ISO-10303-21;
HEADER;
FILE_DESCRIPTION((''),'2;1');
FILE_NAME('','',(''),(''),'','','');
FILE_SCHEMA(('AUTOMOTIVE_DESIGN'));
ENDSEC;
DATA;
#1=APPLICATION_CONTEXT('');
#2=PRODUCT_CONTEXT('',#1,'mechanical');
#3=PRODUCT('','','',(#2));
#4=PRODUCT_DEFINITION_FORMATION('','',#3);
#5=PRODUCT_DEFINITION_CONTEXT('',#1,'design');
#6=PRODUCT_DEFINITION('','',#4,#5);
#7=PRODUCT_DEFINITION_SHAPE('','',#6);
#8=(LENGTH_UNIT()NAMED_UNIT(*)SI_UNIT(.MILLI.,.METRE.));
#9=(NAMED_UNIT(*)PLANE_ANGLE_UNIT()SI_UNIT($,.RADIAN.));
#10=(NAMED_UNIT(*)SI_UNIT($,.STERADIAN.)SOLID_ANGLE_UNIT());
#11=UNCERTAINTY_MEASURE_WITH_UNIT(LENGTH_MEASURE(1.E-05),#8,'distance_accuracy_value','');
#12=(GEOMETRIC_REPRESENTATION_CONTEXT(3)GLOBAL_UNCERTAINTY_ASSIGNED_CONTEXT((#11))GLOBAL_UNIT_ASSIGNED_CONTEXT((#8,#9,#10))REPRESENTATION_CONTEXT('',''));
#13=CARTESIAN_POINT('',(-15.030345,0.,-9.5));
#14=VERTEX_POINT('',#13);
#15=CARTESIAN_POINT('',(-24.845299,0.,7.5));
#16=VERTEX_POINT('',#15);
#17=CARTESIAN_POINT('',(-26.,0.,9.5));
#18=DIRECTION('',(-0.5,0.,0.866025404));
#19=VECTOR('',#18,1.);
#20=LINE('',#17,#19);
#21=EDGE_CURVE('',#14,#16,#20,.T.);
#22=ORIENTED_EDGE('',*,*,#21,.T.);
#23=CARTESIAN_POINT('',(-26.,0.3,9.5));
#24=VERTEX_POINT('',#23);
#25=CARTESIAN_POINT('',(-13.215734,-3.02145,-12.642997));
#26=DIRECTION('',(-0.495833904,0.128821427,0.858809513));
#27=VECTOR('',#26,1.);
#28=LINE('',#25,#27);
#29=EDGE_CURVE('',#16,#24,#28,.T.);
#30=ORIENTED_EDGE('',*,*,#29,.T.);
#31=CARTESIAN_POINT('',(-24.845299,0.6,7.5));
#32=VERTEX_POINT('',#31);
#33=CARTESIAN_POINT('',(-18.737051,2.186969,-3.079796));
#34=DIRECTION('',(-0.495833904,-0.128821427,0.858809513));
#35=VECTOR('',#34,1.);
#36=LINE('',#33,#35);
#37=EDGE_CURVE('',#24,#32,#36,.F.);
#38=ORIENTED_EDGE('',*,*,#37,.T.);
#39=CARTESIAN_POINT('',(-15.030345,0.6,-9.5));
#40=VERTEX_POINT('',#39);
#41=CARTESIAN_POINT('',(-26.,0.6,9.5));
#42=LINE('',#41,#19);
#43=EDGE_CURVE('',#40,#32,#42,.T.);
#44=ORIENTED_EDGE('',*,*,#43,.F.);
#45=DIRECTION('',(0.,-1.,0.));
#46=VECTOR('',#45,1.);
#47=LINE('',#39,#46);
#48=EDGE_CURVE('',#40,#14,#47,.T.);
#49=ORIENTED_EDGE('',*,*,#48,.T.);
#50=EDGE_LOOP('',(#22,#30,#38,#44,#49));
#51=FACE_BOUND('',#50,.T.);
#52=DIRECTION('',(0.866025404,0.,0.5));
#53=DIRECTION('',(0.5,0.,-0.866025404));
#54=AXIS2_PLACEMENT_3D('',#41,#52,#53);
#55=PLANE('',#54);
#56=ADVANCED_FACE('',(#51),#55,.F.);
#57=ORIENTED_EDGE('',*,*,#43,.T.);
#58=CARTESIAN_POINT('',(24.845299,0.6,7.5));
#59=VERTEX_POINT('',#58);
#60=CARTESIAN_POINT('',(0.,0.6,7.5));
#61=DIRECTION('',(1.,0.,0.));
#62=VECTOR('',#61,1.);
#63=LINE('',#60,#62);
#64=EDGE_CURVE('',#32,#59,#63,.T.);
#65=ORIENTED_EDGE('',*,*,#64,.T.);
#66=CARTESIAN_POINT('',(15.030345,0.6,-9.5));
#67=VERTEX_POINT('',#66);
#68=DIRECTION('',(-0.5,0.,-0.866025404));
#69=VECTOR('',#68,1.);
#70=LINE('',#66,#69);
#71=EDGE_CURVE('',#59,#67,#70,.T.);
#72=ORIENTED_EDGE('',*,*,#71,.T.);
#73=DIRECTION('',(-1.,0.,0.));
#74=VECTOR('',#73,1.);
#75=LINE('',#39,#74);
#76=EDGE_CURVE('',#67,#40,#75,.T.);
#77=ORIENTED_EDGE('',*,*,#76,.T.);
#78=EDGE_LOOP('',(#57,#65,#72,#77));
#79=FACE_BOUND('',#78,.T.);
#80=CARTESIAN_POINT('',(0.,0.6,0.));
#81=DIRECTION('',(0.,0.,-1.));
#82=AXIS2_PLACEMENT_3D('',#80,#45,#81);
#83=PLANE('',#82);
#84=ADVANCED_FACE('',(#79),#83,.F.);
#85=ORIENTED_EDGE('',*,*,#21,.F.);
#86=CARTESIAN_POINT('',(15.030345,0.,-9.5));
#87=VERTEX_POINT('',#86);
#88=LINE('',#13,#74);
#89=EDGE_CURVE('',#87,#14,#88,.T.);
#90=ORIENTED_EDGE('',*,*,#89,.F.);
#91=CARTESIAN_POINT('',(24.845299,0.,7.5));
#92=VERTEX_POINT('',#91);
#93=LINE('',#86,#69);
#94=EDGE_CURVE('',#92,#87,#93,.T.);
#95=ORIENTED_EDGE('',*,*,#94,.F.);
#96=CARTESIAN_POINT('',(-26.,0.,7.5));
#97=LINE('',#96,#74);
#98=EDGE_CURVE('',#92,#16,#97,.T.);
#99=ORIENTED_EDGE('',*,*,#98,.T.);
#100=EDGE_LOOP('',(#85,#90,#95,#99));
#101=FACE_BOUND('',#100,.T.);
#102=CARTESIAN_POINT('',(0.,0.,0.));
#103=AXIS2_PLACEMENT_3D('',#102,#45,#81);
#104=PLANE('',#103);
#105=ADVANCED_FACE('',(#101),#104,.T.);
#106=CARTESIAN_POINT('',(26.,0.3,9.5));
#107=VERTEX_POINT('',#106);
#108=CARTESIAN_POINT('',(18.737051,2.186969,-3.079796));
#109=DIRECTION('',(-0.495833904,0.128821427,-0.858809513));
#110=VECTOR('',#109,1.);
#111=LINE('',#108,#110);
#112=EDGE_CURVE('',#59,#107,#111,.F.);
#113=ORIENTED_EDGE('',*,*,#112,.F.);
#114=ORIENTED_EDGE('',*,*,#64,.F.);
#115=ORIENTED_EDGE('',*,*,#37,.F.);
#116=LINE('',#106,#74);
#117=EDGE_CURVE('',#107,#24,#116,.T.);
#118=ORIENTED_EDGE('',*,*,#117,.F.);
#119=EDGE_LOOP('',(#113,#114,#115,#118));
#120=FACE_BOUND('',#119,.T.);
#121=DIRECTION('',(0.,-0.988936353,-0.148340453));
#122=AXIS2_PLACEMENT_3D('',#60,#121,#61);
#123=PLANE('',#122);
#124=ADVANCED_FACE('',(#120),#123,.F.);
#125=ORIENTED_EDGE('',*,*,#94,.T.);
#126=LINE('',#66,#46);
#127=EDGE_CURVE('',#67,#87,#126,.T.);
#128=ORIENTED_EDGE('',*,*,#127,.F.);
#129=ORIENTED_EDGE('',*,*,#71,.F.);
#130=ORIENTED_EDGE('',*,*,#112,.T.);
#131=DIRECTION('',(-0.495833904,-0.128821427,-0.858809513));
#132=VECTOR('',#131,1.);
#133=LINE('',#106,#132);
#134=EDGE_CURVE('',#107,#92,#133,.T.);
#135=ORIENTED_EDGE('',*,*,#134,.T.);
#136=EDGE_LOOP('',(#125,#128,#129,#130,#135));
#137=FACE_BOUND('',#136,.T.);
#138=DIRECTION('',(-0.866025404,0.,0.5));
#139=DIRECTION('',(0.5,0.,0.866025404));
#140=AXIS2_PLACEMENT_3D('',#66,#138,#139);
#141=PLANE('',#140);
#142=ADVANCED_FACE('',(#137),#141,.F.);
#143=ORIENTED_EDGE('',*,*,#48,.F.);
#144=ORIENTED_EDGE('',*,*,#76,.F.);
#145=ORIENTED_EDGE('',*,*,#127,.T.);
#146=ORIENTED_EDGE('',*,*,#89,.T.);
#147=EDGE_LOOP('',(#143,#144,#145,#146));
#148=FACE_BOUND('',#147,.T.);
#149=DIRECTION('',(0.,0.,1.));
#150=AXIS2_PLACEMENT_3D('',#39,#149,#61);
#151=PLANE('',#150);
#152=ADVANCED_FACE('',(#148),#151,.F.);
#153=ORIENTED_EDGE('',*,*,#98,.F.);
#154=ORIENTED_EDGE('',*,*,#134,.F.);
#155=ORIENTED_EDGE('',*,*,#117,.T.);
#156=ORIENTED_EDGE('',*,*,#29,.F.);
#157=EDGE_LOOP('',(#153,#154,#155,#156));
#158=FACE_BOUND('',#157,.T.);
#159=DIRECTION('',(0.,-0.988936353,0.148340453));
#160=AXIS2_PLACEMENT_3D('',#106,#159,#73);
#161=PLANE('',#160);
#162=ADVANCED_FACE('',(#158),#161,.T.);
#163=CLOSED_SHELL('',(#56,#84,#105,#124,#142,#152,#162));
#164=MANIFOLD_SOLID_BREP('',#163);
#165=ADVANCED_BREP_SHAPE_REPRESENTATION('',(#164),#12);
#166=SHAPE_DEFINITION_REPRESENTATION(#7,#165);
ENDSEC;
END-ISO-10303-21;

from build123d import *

# Parameters (mm, degrees)
BOSS_EXTRUDE1_DEPTH = 0.6
CHAMFER1_SIZE       = 0.3
CHAMFER1_SIZE2      = 2
CHAMFER2_SIZE       = 0.3
CHAMFER2_SIZE_2     = 2


with BuildPart() as part:
    # Sketch1 → Boss-Extrude1 (new body)
    with BuildSketch(Plane(origin=(0, 0, 0), x_dir=(1, 0, 0), z_dir=(0, 1, 0))):
        Polygon((-15.030344885, 9.5), (15.030344885, 9.5), (26, -9.5), (-26, -9.5), align=None)
    extrude(amount=BOSS_EXTRUDE1_DEPTH)

    # Chamfer1
    chamfer1_edges = [part.edges().sort_by_distance(p)[0] for p in [
        (0, 0.6, 9.5),
    ]]
    chamfer1_side = [part.faces().sort_by_distance(p)[0] for p in [
        (0, 0.3, 9.5),
    ]]
    chamfer(chamfer1_edges, length=CHAMFER1_SIZE, length2=CHAMFER1_SIZE2, reference=chamfer1_side[0])

    # Chamfer2
    # the kernel refuses this chamfer: 2, 0.3 mm, written as the material it takes off along each edge
    with BuildSketch(Plane(origin=(31.19787194, 0, 9.5), x_dir=(0, 0.9692970769593504, 0.24589261192247985), z_dir=(-1, 0, 0))) as chamfer2_piece_1:
        Polygon((CHAMFER2_SIZE * 0.969297076959, CHAMFER2_SIZE * 0.245892611922), (-CHAMFER2_SIZE_2 * 0.245892611922, CHAMFER2_SIZE_2 * 0.969297076959), (0, 0), align=None)
    extrude(amount=62.39574388, mode=Mode.SUBTRACT)


solid = part.part
